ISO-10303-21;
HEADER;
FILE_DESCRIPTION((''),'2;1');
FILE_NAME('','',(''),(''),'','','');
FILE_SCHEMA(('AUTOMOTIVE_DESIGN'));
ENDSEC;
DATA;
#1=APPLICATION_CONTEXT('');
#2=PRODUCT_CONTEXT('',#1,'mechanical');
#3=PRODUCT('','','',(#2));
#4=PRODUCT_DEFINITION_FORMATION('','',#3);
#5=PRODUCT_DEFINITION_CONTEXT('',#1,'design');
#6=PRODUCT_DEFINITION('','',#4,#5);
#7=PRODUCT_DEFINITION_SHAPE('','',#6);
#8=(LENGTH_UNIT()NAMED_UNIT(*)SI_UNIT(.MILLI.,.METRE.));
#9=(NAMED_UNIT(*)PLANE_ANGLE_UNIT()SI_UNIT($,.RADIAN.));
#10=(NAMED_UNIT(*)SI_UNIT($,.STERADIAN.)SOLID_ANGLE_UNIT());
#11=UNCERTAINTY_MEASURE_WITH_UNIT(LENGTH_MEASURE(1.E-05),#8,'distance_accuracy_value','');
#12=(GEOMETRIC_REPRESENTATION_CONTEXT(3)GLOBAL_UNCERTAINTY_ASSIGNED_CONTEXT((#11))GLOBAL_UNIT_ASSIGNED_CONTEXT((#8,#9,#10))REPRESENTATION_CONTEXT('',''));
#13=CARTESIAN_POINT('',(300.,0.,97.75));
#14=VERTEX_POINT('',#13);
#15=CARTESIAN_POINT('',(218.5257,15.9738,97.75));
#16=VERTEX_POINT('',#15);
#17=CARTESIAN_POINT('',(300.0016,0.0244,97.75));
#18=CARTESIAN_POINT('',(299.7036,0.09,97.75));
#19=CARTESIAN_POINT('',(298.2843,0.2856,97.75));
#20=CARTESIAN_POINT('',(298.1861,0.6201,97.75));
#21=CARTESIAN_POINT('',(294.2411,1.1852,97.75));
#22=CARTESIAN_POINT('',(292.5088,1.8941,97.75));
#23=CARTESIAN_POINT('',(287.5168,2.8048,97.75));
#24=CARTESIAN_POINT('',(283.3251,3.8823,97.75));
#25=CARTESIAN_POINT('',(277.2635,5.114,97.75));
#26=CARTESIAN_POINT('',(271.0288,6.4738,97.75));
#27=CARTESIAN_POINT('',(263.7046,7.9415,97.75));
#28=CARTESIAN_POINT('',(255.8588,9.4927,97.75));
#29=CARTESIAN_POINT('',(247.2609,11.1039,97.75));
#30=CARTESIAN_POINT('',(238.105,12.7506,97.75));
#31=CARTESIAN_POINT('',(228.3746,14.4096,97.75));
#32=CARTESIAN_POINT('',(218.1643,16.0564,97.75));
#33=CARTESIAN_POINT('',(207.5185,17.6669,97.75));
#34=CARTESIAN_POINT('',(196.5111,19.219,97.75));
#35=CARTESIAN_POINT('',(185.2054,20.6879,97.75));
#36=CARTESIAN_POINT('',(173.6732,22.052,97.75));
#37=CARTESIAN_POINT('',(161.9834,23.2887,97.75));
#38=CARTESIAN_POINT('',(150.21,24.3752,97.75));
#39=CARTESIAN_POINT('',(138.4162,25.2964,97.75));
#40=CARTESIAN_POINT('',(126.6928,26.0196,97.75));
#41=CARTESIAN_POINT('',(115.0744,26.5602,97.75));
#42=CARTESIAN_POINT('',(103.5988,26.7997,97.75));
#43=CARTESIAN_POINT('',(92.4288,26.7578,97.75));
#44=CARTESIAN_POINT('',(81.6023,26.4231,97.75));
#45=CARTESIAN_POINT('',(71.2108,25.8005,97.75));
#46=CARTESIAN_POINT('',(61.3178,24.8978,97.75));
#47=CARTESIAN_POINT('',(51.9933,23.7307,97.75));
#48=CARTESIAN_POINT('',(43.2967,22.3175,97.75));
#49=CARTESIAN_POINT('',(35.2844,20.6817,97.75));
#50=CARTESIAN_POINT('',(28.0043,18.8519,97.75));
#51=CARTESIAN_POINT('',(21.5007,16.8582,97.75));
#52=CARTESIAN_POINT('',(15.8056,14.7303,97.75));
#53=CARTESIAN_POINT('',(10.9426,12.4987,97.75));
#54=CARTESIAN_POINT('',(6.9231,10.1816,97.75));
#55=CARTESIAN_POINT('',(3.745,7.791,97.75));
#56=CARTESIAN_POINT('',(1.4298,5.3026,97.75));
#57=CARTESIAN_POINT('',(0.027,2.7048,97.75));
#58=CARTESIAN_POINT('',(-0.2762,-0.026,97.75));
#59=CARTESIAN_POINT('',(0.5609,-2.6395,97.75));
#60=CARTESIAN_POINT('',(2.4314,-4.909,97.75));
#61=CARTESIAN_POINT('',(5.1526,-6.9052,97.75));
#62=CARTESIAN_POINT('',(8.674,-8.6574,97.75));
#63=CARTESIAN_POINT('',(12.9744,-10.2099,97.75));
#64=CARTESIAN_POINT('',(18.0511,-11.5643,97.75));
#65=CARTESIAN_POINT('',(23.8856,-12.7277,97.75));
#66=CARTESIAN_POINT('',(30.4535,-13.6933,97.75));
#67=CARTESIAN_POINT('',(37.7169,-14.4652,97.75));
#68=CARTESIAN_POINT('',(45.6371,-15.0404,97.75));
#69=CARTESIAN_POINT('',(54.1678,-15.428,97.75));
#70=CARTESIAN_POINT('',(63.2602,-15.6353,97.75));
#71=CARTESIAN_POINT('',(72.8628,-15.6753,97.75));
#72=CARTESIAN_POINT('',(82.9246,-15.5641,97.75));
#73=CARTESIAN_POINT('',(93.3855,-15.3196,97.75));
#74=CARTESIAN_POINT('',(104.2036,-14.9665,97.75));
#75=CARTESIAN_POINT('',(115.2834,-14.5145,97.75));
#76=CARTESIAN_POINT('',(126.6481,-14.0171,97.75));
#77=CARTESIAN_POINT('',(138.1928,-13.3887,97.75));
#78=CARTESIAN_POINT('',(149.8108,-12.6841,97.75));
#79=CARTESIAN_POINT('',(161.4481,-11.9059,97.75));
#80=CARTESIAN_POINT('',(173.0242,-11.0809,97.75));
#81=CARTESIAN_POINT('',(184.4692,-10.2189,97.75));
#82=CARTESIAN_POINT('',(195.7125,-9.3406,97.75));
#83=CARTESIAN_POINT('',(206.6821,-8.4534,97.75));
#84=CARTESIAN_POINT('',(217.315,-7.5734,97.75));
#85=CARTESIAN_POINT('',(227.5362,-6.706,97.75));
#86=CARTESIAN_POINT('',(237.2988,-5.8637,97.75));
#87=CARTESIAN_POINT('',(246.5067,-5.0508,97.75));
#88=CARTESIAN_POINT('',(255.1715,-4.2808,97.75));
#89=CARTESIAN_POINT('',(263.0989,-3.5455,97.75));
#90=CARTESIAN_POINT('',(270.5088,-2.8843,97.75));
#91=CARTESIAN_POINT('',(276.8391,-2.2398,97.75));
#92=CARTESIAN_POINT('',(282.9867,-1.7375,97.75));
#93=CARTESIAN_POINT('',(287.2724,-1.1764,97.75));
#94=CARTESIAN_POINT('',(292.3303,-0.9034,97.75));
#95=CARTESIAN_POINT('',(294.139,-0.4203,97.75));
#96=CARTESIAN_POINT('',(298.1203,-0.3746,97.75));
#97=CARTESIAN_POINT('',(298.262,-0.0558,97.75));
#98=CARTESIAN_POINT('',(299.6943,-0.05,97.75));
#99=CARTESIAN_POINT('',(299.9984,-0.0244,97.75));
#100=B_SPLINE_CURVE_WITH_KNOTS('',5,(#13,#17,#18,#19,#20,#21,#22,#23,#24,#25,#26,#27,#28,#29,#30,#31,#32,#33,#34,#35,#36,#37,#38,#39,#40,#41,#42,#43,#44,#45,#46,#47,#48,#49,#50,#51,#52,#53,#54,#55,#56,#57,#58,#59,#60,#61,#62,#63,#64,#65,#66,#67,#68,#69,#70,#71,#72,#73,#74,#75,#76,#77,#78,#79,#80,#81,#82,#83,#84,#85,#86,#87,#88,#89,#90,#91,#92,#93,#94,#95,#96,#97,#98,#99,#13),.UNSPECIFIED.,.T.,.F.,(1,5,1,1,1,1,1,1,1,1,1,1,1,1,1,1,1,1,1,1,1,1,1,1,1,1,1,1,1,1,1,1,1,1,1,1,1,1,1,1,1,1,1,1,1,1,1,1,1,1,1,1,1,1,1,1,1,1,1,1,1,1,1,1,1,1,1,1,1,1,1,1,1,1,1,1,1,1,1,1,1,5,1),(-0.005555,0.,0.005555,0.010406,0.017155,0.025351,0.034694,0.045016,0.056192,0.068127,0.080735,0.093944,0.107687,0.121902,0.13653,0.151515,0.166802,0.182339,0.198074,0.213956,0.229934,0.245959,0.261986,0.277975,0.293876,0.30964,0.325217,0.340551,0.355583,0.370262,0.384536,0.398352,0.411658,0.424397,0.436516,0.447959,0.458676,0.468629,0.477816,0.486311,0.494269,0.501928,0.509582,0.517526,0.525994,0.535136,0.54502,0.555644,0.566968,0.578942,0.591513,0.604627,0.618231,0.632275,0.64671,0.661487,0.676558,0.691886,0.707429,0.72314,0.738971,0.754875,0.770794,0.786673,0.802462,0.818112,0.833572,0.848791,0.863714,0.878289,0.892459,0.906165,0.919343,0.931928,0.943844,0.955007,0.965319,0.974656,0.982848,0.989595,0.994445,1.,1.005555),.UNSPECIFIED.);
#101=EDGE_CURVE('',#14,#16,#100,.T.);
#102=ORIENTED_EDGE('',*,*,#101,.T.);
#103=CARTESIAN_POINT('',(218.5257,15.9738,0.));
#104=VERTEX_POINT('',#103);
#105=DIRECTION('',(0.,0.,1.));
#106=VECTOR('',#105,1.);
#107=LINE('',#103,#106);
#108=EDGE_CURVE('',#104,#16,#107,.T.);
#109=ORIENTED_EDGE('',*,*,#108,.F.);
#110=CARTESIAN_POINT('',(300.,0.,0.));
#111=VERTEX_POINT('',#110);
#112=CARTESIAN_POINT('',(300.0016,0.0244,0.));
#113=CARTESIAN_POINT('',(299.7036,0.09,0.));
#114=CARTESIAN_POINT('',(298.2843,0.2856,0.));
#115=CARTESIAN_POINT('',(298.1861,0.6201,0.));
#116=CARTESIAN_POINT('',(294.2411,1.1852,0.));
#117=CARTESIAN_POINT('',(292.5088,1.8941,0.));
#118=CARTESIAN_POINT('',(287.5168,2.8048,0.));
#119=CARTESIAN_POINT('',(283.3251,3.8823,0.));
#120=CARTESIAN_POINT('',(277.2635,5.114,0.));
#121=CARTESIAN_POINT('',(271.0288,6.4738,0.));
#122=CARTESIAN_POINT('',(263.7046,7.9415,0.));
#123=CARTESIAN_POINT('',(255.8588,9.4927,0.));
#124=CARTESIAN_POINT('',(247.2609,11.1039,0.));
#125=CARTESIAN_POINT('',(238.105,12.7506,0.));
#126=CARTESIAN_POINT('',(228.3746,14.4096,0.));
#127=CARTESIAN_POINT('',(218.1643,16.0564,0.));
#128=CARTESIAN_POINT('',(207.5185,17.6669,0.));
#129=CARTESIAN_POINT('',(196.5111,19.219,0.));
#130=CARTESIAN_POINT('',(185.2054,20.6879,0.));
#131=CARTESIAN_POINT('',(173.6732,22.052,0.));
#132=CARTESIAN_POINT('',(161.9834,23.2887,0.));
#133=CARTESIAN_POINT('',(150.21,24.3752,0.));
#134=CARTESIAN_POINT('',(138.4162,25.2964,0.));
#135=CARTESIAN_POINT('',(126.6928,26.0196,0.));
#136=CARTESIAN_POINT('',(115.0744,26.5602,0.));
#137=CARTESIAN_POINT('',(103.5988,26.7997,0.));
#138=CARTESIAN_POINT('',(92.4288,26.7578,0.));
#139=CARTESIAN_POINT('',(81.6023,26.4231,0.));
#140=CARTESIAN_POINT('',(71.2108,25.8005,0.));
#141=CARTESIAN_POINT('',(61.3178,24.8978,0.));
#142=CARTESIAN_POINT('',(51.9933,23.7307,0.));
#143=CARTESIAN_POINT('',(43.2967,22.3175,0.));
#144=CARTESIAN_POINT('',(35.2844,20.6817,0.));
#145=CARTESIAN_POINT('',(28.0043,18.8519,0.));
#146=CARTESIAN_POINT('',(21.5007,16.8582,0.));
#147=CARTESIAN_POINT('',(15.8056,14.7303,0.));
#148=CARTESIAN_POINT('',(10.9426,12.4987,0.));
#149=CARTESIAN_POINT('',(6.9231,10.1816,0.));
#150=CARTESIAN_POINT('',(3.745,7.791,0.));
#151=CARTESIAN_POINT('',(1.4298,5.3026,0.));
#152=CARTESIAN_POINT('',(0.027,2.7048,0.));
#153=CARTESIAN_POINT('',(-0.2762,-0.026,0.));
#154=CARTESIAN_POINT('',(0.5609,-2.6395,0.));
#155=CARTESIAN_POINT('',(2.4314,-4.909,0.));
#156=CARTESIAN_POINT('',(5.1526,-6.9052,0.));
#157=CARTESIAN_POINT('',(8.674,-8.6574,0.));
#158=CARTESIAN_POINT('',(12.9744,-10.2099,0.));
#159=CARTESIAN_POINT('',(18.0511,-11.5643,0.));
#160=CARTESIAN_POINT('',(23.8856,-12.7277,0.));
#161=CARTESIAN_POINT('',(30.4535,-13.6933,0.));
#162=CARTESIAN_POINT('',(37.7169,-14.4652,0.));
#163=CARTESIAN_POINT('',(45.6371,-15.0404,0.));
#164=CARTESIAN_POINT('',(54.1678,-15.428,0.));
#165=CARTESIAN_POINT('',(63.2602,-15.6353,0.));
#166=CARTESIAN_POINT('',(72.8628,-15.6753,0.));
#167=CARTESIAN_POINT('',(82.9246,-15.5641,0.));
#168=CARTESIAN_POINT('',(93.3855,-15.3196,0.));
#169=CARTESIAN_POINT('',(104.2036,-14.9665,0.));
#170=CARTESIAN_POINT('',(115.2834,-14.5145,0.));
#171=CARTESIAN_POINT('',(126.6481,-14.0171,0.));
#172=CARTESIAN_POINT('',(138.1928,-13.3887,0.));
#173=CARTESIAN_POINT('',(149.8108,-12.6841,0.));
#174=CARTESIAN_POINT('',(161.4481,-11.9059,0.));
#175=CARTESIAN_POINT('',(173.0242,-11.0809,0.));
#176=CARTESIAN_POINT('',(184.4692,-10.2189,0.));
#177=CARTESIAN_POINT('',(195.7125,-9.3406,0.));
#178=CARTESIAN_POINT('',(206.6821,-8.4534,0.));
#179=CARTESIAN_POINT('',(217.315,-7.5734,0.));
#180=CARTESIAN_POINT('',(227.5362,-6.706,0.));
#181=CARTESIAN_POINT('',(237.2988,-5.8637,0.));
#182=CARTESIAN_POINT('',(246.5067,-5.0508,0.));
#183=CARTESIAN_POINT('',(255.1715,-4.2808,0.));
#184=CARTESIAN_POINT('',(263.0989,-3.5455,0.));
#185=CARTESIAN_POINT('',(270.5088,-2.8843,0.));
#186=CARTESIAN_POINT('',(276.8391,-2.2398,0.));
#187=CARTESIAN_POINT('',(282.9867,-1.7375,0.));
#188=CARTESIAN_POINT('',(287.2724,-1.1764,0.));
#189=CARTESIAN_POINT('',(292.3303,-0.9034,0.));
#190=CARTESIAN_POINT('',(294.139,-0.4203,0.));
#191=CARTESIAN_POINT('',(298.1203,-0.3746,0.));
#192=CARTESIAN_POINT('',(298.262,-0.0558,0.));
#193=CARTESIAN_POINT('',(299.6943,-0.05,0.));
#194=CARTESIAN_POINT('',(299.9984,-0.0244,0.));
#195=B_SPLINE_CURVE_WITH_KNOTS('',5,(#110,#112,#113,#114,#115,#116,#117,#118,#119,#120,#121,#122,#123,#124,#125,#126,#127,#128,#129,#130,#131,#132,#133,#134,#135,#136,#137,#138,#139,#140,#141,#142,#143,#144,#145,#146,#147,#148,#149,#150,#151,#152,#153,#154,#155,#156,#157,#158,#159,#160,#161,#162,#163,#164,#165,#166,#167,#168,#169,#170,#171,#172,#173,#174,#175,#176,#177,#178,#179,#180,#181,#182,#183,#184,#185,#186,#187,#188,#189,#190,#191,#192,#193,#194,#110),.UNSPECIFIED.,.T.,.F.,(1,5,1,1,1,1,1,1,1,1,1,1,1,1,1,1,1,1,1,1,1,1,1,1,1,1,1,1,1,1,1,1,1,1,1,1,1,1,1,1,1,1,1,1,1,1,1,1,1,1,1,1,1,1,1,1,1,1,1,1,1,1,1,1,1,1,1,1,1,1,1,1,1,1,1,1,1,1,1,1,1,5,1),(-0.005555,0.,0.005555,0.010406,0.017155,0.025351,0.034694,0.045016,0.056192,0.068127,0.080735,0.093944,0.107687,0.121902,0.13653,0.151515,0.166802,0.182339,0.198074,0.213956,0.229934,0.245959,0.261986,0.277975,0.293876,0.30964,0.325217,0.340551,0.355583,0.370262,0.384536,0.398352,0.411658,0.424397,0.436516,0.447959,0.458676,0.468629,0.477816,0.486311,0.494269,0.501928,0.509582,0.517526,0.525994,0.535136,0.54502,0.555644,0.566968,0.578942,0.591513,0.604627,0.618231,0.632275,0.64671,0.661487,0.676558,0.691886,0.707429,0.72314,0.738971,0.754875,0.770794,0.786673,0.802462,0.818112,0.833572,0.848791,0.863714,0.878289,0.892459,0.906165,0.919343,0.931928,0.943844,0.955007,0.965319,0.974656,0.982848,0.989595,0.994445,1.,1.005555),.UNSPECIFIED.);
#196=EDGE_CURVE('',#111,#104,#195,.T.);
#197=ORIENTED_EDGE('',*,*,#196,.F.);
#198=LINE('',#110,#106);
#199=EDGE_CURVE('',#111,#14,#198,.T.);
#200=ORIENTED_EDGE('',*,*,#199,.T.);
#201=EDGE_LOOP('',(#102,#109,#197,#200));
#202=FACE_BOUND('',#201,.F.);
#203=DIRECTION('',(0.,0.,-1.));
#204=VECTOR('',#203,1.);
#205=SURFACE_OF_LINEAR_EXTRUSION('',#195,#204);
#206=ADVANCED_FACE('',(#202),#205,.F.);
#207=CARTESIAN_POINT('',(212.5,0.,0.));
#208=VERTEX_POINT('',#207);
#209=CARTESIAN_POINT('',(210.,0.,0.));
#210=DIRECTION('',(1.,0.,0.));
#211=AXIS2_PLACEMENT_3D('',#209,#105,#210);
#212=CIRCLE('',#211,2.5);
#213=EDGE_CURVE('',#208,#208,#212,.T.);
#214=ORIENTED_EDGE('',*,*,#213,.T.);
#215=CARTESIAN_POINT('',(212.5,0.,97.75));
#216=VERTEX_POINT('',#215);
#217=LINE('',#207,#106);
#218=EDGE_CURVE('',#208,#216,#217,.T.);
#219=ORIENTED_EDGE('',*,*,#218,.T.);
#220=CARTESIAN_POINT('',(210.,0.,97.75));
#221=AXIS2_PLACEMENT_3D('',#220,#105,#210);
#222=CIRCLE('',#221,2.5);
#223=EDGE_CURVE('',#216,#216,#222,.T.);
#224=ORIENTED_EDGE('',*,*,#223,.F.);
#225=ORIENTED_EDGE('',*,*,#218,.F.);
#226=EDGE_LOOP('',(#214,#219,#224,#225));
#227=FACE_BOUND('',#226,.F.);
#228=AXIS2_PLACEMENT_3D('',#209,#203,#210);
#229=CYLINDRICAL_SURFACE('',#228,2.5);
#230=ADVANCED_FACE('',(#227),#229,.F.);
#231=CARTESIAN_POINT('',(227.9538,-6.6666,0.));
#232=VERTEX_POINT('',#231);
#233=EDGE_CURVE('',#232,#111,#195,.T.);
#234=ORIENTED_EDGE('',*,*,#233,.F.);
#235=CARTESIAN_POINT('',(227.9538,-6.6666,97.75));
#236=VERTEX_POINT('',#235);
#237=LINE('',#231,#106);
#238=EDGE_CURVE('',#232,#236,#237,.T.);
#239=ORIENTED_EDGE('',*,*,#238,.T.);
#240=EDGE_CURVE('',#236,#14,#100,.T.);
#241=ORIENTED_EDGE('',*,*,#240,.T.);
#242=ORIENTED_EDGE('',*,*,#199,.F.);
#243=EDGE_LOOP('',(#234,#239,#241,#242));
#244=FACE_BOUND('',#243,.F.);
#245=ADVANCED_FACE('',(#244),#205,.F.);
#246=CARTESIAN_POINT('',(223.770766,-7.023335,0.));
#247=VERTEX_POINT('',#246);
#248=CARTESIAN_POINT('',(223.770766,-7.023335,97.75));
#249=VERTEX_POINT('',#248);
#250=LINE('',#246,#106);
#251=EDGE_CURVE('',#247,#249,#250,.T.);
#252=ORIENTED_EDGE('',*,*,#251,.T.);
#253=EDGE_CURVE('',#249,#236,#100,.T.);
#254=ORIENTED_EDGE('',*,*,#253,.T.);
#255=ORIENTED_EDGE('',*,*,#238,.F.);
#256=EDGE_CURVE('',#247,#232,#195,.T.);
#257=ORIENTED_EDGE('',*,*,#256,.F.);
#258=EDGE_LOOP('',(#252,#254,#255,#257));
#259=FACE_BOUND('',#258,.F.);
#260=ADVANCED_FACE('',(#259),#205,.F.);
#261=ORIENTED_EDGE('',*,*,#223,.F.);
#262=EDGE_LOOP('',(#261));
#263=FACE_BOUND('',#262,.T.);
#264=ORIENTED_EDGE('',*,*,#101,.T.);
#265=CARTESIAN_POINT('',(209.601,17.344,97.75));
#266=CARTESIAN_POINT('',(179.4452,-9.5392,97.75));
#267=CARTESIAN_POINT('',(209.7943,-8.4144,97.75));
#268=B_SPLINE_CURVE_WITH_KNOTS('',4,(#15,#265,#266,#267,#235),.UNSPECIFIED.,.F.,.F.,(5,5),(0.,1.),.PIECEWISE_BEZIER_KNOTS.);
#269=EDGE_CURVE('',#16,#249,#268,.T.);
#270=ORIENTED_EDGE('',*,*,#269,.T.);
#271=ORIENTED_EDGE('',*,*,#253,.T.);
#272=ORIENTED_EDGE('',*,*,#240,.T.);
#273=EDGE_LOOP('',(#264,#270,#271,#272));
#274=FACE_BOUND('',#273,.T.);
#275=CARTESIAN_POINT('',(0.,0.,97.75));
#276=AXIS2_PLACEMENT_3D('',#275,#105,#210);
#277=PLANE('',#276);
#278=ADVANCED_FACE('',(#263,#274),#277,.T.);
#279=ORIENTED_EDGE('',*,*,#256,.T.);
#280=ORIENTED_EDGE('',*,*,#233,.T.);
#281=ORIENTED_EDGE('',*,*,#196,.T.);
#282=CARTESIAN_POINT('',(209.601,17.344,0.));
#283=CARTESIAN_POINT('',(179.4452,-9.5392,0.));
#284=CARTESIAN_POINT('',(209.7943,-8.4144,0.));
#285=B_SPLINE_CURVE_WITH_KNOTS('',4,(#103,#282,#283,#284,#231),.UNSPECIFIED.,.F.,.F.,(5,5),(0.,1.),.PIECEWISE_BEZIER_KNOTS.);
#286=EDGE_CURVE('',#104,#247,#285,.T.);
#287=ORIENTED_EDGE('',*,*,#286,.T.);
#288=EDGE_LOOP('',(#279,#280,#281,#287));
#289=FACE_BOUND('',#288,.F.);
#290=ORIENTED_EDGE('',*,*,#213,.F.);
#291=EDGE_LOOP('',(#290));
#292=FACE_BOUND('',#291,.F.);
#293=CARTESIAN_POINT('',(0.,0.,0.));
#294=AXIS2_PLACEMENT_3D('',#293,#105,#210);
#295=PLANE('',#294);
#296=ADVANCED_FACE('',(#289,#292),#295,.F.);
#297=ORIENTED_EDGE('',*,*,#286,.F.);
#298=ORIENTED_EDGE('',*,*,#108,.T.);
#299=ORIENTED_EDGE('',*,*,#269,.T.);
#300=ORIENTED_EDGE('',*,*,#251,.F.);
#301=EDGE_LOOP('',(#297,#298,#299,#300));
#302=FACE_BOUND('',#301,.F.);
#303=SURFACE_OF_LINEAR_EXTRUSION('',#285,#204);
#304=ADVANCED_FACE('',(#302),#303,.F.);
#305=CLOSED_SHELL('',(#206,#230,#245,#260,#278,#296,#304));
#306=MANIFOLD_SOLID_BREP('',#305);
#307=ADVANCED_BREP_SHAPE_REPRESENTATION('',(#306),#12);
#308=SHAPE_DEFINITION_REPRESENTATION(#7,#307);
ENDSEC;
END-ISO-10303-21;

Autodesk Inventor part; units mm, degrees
ref_plane "YZ Plane" through (0, 0, 0) normal (1, 0, 0) x (0, 1, 0)
ref_plane "XZ Plane" through (0, 0, 0) normal (0, 1, 0) x (-1, 0, 0)
ref_plane "XY Plane" through (0, 0, 0) normal (0, 0, 1) x (1, 0, 0)
sketch "Sketch1" plane through (0, 0, 0) normal (0, 0, 1) x (1, 0, 0)
  spline S0 degree 5 poles (300, 0) (300.0016, 0.0244) (299.7036, 0.09) (298.2843, 0.2856) (298.1861, 0.6201) (294.2411, 1.1852) (292.5088, 1.8941) (287.5168, 2.8048) (283.3251, 3.8823) (277.2635, 5.114) (271.0288, 6.4738) (263.7046, 7.9415) (255.8588, 9.4927) (247.2609, 11.1039) (238.105, 12.7506) (228.3746, 14.4096) (218.1643, 16.0564) (207.5185, 17.6669) (196.5111, 19.219) (185.2054, 20.6879) (173.6732, 22.052) (161.9834, 23.2887) (150.21, 24.3752) (138.4162, 25.2964) (126.6928, 26.0196) (115.0744, 26.5602) (103.5988, 26.7997) (92.4288, 26.7578) (81.6023, 26.4231) (71.2108, 25.8005) (61.3178, 24.8978) (51.9933, 23.7307) (43.2967, 22.3175) (35.2844, 20.6817) (28.0043, 18.8519) (21.5007, 16.8582) (15.8056, 14.7303) (10.9426, 12.4987) (6.9231, 10.1816) (3.745, 7.791) (1.4298, 5.3026) (0.027, 2.7048) (-0.2762, -0.026) (0.5609, -2.6395) (2.4314, -4.909) (5.1526, -6.9052) (8.674, -8.6574) (12.9744, -10.2099) (18.0511, -11.5643) (23.8856, -12.7277) (30.4535, -13.6933) (37.7169, -14.4652) (45.6371, -15.0404) (54.1678, -15.428) (63.2602, -15.6353) (72.8628, -15.6753) (82.9246, -15.5641) (93.3855, -15.3196) (104.2036, -14.9665) (115.2834, -14.5145) (126.6481, -14.0171) (138.1928, -13.3887) (149.8108, -12.6841) (161.4481, -11.9059) (173.0242, -11.0809) (184.4692, -10.2189) (195.7125, -9.3406) (206.6821, -8.4534) (217.315, -7.5734) (227.5362, -6.706) (237.2988, -5.8637) (246.5067, -5.0508) (255.1715, -4.2808) (263.0989, -3.5455) (270.5088, -2.8843) (276.8391, -2.2398) (282.9867, -1.7375) (287.2724, -1.1764) (292.3303, -0.9034) (294.139, -0.4203) (298.1203, -0.3746) (298.262, -0.0558) (299.6943, -0.05) (299.9984, -0.0244) (300, 0) knots 0 0 0 0 0 0 0.005555 0.010406 0.017155 0.025351 0.034694 0.045016 0.056192 0.068127 0.080735 0.093944 0.107687 0.121902 0.13653 0.151515 0.166802 0.182339 0.198074 0.213956 0.229934 0.245959 0.261986 0.277975 0.293876 0.30964 0.325217 0.340551 0.355583 0.370262 0.384536 0.398352 0.411658 0.424397 0.436516 0.447959 0.458676 0.468629 0.477816 0.486311 0.494269 0.501928 0.509582 0.517526 0.525994 0.535136 0.54502 0.555644 0.566968 0.578942 0.591513 0.604627 0.618231 0.632275 0.64671 0.661487 0.676558 0.691886 0.707429 0.72314 0.738971 0.754875 0.770794 0.786673 0.802462 0.818112 0.833572 0.848791 0.863714 0.878289 0.892459 0.906165 0.919343 0.931928 0.943844 0.955007 0.965319 0.974656 0.982848 0.989595 0.994445 1 1 1 1 1 1
  line L0 (200, 103) -> (200, -97) construction
  line L1 (0, -164.4758) -> (0, 307.8549) construction
  line L2 (210, 0) -> (210, -12) construction
  line L3 (210, 0) -> (222, 0) construction
  spline S1 degree 4 poles (218.5257, 15.9738) (209.601, 17.344) (179.4452, -9.5392) (209.7943, -8.4144) (227.9538, -6.6666) knots 0 0 0 0 0 1 1 1 1 1
  line L4 (221.1774, 15.5667) -> (215.874, 16.3809) construction
  arc A0 (220.2542, 15.1852) -> (216.6402, 15.74) centre (217.9961, 12.5243) ccw construction
  line L5 (222.2571, -7.2149) -> (233.6505, -6.1183) construction
  arc A1 (223.3931, -7.0631) -> (232.5064, -6.186) centre (204.1762, 240.3791) ccw construction
  circle A2 centre (210, 0) radius 2.5
  point P0 (0, 0)
  point P1 (298.1739, 0.4338)
  point P2 (295.9008, 0.9681)
  point P3 (292.7367, 1.7025)
  point P4 (288.6996, 2.6229)
  point P5 (283.8129, 3.7134)
  point P6 (278.1048, 4.9545)
  point P7 (271.6086, 6.3255)
  point P8 (264.3621, 7.8039)
  point P9 (256.4085, 9.3663)
  point P10 (247.7946, 10.9887)
  point P11 (238.572, 12.6468)
  point P12 (228.7959, 14.3166)
  point P13 (207.8235, 17.5944)
  point P14 (196.755, 19.155)
  point P15 (185.388, 20.6319)
  point P16 (173.7924, 22.0023)
  point P17 (162.0405, 23.2434)
  point P18 (150.2055, 24.3336)
  point P19 (138.3615, 25.2522)
  point P20 (126.5832, 25.98)
  point P21 (114.8976, 26.493)
  point P22 (103.3635, 26.7315)
  point P23 (92.1183, 26.6775)
  point P24 (81.2367, 26.3292)
  point P25 (70.7922, 25.689)
  point P26 (60.8541, 24.7656)
  point P27 (51.489, 23.5734)
  point P28 (42.7587, 22.131)
  point P29 (34.7199, 20.4618)
  point P30 (27.4239, 18.5934)
  point P31 (20.9172, 16.5555)
  point P32 (15.2385, 14.379)
  point P33 (10.422, 12.0954)
  point P34 (6.4944, 9.7347)
  point P35 (3.4767, 7.3239)
  point P36 (1.3836, 4.8867)
  point P37 (0.2238, 2.4411)
  point P38 (0, 0)
  point P39 (0.7011, -2.3487)
  point P40 (2.31, -4.5201)
  point P41 (4.8123, -6.5094)
  point P42 (8.1885, -8.3112)
  point P43 (12.414, -9.9204)
  point P44 (17.4594, -11.3319)
  point P45 (23.2908, -12.5418)
  point P46 (29.871, -13.5477)
  point P47 (37.1583, -14.3505)
  point P48 (45.1092, -14.9526)
  point P49 (53.6766, -15.3609)
  point P50 (62.8101, -15.5853)
  point P51 (72.4581, -15.639)
  point P52 (82.566, -15.5385)
  point P53 (93.0768, -15.3033)
  point P54 (103.9314, -14.9544)
  point P55 (115.0689, -14.514)
  point P56 (126.4866, -13.9956)
  point P57 (138.1008, -13.3755)
  point P58 (149.7945, -12.6672)
  point P59 (161.4972, -11.8896)
  point P60 (173.1378, -11.061)
  point P61 (184.6455, -10.1973)
  point P62 (195.9501, -9.3141)
  point P63 (206.9814, -8.4237)
  point P64 (217.6716, -7.5381)
  point P65 (227.9538, -6.6666)
  point P66 (237.7638, -5.8185)
  point P67 (247.0398, -5.0019)
  point P68 (255.7236, -4.2234)
  point P69 (263.7597, -3.4905)
  point P70 (271.0965, -2.8098)
  point P71 (277.6872, -2.1882)
  point P72 (283.4889, -1.6323)
  point P73 (288.4641, -1.1487)
  point P74 (292.5804, -0.7434)
  point P75 (295.8102, -0.4221)
  point P76 (298.1328, -0.1887)
  point P77 (299.5323, -0.0474)
  point P78 (200, 0)
  point P79 (223.7705, -7.0234)
  dimension "d0" = 200
  dimension "d2" = 200
  dimension "d3" = 12
  dimension "d4" = 90
  dimension "d5" = 10
  dimension "d17" = 5
extrude "Extrusion2" add sketch "Sketch1" along normal blind 97.75 contours S0 S1 picked at (264.3061, 0.3433)
properties part number "4P.01.01.01-TW-v1-Flap Shape Definition" material "Polyurethane Foam"
